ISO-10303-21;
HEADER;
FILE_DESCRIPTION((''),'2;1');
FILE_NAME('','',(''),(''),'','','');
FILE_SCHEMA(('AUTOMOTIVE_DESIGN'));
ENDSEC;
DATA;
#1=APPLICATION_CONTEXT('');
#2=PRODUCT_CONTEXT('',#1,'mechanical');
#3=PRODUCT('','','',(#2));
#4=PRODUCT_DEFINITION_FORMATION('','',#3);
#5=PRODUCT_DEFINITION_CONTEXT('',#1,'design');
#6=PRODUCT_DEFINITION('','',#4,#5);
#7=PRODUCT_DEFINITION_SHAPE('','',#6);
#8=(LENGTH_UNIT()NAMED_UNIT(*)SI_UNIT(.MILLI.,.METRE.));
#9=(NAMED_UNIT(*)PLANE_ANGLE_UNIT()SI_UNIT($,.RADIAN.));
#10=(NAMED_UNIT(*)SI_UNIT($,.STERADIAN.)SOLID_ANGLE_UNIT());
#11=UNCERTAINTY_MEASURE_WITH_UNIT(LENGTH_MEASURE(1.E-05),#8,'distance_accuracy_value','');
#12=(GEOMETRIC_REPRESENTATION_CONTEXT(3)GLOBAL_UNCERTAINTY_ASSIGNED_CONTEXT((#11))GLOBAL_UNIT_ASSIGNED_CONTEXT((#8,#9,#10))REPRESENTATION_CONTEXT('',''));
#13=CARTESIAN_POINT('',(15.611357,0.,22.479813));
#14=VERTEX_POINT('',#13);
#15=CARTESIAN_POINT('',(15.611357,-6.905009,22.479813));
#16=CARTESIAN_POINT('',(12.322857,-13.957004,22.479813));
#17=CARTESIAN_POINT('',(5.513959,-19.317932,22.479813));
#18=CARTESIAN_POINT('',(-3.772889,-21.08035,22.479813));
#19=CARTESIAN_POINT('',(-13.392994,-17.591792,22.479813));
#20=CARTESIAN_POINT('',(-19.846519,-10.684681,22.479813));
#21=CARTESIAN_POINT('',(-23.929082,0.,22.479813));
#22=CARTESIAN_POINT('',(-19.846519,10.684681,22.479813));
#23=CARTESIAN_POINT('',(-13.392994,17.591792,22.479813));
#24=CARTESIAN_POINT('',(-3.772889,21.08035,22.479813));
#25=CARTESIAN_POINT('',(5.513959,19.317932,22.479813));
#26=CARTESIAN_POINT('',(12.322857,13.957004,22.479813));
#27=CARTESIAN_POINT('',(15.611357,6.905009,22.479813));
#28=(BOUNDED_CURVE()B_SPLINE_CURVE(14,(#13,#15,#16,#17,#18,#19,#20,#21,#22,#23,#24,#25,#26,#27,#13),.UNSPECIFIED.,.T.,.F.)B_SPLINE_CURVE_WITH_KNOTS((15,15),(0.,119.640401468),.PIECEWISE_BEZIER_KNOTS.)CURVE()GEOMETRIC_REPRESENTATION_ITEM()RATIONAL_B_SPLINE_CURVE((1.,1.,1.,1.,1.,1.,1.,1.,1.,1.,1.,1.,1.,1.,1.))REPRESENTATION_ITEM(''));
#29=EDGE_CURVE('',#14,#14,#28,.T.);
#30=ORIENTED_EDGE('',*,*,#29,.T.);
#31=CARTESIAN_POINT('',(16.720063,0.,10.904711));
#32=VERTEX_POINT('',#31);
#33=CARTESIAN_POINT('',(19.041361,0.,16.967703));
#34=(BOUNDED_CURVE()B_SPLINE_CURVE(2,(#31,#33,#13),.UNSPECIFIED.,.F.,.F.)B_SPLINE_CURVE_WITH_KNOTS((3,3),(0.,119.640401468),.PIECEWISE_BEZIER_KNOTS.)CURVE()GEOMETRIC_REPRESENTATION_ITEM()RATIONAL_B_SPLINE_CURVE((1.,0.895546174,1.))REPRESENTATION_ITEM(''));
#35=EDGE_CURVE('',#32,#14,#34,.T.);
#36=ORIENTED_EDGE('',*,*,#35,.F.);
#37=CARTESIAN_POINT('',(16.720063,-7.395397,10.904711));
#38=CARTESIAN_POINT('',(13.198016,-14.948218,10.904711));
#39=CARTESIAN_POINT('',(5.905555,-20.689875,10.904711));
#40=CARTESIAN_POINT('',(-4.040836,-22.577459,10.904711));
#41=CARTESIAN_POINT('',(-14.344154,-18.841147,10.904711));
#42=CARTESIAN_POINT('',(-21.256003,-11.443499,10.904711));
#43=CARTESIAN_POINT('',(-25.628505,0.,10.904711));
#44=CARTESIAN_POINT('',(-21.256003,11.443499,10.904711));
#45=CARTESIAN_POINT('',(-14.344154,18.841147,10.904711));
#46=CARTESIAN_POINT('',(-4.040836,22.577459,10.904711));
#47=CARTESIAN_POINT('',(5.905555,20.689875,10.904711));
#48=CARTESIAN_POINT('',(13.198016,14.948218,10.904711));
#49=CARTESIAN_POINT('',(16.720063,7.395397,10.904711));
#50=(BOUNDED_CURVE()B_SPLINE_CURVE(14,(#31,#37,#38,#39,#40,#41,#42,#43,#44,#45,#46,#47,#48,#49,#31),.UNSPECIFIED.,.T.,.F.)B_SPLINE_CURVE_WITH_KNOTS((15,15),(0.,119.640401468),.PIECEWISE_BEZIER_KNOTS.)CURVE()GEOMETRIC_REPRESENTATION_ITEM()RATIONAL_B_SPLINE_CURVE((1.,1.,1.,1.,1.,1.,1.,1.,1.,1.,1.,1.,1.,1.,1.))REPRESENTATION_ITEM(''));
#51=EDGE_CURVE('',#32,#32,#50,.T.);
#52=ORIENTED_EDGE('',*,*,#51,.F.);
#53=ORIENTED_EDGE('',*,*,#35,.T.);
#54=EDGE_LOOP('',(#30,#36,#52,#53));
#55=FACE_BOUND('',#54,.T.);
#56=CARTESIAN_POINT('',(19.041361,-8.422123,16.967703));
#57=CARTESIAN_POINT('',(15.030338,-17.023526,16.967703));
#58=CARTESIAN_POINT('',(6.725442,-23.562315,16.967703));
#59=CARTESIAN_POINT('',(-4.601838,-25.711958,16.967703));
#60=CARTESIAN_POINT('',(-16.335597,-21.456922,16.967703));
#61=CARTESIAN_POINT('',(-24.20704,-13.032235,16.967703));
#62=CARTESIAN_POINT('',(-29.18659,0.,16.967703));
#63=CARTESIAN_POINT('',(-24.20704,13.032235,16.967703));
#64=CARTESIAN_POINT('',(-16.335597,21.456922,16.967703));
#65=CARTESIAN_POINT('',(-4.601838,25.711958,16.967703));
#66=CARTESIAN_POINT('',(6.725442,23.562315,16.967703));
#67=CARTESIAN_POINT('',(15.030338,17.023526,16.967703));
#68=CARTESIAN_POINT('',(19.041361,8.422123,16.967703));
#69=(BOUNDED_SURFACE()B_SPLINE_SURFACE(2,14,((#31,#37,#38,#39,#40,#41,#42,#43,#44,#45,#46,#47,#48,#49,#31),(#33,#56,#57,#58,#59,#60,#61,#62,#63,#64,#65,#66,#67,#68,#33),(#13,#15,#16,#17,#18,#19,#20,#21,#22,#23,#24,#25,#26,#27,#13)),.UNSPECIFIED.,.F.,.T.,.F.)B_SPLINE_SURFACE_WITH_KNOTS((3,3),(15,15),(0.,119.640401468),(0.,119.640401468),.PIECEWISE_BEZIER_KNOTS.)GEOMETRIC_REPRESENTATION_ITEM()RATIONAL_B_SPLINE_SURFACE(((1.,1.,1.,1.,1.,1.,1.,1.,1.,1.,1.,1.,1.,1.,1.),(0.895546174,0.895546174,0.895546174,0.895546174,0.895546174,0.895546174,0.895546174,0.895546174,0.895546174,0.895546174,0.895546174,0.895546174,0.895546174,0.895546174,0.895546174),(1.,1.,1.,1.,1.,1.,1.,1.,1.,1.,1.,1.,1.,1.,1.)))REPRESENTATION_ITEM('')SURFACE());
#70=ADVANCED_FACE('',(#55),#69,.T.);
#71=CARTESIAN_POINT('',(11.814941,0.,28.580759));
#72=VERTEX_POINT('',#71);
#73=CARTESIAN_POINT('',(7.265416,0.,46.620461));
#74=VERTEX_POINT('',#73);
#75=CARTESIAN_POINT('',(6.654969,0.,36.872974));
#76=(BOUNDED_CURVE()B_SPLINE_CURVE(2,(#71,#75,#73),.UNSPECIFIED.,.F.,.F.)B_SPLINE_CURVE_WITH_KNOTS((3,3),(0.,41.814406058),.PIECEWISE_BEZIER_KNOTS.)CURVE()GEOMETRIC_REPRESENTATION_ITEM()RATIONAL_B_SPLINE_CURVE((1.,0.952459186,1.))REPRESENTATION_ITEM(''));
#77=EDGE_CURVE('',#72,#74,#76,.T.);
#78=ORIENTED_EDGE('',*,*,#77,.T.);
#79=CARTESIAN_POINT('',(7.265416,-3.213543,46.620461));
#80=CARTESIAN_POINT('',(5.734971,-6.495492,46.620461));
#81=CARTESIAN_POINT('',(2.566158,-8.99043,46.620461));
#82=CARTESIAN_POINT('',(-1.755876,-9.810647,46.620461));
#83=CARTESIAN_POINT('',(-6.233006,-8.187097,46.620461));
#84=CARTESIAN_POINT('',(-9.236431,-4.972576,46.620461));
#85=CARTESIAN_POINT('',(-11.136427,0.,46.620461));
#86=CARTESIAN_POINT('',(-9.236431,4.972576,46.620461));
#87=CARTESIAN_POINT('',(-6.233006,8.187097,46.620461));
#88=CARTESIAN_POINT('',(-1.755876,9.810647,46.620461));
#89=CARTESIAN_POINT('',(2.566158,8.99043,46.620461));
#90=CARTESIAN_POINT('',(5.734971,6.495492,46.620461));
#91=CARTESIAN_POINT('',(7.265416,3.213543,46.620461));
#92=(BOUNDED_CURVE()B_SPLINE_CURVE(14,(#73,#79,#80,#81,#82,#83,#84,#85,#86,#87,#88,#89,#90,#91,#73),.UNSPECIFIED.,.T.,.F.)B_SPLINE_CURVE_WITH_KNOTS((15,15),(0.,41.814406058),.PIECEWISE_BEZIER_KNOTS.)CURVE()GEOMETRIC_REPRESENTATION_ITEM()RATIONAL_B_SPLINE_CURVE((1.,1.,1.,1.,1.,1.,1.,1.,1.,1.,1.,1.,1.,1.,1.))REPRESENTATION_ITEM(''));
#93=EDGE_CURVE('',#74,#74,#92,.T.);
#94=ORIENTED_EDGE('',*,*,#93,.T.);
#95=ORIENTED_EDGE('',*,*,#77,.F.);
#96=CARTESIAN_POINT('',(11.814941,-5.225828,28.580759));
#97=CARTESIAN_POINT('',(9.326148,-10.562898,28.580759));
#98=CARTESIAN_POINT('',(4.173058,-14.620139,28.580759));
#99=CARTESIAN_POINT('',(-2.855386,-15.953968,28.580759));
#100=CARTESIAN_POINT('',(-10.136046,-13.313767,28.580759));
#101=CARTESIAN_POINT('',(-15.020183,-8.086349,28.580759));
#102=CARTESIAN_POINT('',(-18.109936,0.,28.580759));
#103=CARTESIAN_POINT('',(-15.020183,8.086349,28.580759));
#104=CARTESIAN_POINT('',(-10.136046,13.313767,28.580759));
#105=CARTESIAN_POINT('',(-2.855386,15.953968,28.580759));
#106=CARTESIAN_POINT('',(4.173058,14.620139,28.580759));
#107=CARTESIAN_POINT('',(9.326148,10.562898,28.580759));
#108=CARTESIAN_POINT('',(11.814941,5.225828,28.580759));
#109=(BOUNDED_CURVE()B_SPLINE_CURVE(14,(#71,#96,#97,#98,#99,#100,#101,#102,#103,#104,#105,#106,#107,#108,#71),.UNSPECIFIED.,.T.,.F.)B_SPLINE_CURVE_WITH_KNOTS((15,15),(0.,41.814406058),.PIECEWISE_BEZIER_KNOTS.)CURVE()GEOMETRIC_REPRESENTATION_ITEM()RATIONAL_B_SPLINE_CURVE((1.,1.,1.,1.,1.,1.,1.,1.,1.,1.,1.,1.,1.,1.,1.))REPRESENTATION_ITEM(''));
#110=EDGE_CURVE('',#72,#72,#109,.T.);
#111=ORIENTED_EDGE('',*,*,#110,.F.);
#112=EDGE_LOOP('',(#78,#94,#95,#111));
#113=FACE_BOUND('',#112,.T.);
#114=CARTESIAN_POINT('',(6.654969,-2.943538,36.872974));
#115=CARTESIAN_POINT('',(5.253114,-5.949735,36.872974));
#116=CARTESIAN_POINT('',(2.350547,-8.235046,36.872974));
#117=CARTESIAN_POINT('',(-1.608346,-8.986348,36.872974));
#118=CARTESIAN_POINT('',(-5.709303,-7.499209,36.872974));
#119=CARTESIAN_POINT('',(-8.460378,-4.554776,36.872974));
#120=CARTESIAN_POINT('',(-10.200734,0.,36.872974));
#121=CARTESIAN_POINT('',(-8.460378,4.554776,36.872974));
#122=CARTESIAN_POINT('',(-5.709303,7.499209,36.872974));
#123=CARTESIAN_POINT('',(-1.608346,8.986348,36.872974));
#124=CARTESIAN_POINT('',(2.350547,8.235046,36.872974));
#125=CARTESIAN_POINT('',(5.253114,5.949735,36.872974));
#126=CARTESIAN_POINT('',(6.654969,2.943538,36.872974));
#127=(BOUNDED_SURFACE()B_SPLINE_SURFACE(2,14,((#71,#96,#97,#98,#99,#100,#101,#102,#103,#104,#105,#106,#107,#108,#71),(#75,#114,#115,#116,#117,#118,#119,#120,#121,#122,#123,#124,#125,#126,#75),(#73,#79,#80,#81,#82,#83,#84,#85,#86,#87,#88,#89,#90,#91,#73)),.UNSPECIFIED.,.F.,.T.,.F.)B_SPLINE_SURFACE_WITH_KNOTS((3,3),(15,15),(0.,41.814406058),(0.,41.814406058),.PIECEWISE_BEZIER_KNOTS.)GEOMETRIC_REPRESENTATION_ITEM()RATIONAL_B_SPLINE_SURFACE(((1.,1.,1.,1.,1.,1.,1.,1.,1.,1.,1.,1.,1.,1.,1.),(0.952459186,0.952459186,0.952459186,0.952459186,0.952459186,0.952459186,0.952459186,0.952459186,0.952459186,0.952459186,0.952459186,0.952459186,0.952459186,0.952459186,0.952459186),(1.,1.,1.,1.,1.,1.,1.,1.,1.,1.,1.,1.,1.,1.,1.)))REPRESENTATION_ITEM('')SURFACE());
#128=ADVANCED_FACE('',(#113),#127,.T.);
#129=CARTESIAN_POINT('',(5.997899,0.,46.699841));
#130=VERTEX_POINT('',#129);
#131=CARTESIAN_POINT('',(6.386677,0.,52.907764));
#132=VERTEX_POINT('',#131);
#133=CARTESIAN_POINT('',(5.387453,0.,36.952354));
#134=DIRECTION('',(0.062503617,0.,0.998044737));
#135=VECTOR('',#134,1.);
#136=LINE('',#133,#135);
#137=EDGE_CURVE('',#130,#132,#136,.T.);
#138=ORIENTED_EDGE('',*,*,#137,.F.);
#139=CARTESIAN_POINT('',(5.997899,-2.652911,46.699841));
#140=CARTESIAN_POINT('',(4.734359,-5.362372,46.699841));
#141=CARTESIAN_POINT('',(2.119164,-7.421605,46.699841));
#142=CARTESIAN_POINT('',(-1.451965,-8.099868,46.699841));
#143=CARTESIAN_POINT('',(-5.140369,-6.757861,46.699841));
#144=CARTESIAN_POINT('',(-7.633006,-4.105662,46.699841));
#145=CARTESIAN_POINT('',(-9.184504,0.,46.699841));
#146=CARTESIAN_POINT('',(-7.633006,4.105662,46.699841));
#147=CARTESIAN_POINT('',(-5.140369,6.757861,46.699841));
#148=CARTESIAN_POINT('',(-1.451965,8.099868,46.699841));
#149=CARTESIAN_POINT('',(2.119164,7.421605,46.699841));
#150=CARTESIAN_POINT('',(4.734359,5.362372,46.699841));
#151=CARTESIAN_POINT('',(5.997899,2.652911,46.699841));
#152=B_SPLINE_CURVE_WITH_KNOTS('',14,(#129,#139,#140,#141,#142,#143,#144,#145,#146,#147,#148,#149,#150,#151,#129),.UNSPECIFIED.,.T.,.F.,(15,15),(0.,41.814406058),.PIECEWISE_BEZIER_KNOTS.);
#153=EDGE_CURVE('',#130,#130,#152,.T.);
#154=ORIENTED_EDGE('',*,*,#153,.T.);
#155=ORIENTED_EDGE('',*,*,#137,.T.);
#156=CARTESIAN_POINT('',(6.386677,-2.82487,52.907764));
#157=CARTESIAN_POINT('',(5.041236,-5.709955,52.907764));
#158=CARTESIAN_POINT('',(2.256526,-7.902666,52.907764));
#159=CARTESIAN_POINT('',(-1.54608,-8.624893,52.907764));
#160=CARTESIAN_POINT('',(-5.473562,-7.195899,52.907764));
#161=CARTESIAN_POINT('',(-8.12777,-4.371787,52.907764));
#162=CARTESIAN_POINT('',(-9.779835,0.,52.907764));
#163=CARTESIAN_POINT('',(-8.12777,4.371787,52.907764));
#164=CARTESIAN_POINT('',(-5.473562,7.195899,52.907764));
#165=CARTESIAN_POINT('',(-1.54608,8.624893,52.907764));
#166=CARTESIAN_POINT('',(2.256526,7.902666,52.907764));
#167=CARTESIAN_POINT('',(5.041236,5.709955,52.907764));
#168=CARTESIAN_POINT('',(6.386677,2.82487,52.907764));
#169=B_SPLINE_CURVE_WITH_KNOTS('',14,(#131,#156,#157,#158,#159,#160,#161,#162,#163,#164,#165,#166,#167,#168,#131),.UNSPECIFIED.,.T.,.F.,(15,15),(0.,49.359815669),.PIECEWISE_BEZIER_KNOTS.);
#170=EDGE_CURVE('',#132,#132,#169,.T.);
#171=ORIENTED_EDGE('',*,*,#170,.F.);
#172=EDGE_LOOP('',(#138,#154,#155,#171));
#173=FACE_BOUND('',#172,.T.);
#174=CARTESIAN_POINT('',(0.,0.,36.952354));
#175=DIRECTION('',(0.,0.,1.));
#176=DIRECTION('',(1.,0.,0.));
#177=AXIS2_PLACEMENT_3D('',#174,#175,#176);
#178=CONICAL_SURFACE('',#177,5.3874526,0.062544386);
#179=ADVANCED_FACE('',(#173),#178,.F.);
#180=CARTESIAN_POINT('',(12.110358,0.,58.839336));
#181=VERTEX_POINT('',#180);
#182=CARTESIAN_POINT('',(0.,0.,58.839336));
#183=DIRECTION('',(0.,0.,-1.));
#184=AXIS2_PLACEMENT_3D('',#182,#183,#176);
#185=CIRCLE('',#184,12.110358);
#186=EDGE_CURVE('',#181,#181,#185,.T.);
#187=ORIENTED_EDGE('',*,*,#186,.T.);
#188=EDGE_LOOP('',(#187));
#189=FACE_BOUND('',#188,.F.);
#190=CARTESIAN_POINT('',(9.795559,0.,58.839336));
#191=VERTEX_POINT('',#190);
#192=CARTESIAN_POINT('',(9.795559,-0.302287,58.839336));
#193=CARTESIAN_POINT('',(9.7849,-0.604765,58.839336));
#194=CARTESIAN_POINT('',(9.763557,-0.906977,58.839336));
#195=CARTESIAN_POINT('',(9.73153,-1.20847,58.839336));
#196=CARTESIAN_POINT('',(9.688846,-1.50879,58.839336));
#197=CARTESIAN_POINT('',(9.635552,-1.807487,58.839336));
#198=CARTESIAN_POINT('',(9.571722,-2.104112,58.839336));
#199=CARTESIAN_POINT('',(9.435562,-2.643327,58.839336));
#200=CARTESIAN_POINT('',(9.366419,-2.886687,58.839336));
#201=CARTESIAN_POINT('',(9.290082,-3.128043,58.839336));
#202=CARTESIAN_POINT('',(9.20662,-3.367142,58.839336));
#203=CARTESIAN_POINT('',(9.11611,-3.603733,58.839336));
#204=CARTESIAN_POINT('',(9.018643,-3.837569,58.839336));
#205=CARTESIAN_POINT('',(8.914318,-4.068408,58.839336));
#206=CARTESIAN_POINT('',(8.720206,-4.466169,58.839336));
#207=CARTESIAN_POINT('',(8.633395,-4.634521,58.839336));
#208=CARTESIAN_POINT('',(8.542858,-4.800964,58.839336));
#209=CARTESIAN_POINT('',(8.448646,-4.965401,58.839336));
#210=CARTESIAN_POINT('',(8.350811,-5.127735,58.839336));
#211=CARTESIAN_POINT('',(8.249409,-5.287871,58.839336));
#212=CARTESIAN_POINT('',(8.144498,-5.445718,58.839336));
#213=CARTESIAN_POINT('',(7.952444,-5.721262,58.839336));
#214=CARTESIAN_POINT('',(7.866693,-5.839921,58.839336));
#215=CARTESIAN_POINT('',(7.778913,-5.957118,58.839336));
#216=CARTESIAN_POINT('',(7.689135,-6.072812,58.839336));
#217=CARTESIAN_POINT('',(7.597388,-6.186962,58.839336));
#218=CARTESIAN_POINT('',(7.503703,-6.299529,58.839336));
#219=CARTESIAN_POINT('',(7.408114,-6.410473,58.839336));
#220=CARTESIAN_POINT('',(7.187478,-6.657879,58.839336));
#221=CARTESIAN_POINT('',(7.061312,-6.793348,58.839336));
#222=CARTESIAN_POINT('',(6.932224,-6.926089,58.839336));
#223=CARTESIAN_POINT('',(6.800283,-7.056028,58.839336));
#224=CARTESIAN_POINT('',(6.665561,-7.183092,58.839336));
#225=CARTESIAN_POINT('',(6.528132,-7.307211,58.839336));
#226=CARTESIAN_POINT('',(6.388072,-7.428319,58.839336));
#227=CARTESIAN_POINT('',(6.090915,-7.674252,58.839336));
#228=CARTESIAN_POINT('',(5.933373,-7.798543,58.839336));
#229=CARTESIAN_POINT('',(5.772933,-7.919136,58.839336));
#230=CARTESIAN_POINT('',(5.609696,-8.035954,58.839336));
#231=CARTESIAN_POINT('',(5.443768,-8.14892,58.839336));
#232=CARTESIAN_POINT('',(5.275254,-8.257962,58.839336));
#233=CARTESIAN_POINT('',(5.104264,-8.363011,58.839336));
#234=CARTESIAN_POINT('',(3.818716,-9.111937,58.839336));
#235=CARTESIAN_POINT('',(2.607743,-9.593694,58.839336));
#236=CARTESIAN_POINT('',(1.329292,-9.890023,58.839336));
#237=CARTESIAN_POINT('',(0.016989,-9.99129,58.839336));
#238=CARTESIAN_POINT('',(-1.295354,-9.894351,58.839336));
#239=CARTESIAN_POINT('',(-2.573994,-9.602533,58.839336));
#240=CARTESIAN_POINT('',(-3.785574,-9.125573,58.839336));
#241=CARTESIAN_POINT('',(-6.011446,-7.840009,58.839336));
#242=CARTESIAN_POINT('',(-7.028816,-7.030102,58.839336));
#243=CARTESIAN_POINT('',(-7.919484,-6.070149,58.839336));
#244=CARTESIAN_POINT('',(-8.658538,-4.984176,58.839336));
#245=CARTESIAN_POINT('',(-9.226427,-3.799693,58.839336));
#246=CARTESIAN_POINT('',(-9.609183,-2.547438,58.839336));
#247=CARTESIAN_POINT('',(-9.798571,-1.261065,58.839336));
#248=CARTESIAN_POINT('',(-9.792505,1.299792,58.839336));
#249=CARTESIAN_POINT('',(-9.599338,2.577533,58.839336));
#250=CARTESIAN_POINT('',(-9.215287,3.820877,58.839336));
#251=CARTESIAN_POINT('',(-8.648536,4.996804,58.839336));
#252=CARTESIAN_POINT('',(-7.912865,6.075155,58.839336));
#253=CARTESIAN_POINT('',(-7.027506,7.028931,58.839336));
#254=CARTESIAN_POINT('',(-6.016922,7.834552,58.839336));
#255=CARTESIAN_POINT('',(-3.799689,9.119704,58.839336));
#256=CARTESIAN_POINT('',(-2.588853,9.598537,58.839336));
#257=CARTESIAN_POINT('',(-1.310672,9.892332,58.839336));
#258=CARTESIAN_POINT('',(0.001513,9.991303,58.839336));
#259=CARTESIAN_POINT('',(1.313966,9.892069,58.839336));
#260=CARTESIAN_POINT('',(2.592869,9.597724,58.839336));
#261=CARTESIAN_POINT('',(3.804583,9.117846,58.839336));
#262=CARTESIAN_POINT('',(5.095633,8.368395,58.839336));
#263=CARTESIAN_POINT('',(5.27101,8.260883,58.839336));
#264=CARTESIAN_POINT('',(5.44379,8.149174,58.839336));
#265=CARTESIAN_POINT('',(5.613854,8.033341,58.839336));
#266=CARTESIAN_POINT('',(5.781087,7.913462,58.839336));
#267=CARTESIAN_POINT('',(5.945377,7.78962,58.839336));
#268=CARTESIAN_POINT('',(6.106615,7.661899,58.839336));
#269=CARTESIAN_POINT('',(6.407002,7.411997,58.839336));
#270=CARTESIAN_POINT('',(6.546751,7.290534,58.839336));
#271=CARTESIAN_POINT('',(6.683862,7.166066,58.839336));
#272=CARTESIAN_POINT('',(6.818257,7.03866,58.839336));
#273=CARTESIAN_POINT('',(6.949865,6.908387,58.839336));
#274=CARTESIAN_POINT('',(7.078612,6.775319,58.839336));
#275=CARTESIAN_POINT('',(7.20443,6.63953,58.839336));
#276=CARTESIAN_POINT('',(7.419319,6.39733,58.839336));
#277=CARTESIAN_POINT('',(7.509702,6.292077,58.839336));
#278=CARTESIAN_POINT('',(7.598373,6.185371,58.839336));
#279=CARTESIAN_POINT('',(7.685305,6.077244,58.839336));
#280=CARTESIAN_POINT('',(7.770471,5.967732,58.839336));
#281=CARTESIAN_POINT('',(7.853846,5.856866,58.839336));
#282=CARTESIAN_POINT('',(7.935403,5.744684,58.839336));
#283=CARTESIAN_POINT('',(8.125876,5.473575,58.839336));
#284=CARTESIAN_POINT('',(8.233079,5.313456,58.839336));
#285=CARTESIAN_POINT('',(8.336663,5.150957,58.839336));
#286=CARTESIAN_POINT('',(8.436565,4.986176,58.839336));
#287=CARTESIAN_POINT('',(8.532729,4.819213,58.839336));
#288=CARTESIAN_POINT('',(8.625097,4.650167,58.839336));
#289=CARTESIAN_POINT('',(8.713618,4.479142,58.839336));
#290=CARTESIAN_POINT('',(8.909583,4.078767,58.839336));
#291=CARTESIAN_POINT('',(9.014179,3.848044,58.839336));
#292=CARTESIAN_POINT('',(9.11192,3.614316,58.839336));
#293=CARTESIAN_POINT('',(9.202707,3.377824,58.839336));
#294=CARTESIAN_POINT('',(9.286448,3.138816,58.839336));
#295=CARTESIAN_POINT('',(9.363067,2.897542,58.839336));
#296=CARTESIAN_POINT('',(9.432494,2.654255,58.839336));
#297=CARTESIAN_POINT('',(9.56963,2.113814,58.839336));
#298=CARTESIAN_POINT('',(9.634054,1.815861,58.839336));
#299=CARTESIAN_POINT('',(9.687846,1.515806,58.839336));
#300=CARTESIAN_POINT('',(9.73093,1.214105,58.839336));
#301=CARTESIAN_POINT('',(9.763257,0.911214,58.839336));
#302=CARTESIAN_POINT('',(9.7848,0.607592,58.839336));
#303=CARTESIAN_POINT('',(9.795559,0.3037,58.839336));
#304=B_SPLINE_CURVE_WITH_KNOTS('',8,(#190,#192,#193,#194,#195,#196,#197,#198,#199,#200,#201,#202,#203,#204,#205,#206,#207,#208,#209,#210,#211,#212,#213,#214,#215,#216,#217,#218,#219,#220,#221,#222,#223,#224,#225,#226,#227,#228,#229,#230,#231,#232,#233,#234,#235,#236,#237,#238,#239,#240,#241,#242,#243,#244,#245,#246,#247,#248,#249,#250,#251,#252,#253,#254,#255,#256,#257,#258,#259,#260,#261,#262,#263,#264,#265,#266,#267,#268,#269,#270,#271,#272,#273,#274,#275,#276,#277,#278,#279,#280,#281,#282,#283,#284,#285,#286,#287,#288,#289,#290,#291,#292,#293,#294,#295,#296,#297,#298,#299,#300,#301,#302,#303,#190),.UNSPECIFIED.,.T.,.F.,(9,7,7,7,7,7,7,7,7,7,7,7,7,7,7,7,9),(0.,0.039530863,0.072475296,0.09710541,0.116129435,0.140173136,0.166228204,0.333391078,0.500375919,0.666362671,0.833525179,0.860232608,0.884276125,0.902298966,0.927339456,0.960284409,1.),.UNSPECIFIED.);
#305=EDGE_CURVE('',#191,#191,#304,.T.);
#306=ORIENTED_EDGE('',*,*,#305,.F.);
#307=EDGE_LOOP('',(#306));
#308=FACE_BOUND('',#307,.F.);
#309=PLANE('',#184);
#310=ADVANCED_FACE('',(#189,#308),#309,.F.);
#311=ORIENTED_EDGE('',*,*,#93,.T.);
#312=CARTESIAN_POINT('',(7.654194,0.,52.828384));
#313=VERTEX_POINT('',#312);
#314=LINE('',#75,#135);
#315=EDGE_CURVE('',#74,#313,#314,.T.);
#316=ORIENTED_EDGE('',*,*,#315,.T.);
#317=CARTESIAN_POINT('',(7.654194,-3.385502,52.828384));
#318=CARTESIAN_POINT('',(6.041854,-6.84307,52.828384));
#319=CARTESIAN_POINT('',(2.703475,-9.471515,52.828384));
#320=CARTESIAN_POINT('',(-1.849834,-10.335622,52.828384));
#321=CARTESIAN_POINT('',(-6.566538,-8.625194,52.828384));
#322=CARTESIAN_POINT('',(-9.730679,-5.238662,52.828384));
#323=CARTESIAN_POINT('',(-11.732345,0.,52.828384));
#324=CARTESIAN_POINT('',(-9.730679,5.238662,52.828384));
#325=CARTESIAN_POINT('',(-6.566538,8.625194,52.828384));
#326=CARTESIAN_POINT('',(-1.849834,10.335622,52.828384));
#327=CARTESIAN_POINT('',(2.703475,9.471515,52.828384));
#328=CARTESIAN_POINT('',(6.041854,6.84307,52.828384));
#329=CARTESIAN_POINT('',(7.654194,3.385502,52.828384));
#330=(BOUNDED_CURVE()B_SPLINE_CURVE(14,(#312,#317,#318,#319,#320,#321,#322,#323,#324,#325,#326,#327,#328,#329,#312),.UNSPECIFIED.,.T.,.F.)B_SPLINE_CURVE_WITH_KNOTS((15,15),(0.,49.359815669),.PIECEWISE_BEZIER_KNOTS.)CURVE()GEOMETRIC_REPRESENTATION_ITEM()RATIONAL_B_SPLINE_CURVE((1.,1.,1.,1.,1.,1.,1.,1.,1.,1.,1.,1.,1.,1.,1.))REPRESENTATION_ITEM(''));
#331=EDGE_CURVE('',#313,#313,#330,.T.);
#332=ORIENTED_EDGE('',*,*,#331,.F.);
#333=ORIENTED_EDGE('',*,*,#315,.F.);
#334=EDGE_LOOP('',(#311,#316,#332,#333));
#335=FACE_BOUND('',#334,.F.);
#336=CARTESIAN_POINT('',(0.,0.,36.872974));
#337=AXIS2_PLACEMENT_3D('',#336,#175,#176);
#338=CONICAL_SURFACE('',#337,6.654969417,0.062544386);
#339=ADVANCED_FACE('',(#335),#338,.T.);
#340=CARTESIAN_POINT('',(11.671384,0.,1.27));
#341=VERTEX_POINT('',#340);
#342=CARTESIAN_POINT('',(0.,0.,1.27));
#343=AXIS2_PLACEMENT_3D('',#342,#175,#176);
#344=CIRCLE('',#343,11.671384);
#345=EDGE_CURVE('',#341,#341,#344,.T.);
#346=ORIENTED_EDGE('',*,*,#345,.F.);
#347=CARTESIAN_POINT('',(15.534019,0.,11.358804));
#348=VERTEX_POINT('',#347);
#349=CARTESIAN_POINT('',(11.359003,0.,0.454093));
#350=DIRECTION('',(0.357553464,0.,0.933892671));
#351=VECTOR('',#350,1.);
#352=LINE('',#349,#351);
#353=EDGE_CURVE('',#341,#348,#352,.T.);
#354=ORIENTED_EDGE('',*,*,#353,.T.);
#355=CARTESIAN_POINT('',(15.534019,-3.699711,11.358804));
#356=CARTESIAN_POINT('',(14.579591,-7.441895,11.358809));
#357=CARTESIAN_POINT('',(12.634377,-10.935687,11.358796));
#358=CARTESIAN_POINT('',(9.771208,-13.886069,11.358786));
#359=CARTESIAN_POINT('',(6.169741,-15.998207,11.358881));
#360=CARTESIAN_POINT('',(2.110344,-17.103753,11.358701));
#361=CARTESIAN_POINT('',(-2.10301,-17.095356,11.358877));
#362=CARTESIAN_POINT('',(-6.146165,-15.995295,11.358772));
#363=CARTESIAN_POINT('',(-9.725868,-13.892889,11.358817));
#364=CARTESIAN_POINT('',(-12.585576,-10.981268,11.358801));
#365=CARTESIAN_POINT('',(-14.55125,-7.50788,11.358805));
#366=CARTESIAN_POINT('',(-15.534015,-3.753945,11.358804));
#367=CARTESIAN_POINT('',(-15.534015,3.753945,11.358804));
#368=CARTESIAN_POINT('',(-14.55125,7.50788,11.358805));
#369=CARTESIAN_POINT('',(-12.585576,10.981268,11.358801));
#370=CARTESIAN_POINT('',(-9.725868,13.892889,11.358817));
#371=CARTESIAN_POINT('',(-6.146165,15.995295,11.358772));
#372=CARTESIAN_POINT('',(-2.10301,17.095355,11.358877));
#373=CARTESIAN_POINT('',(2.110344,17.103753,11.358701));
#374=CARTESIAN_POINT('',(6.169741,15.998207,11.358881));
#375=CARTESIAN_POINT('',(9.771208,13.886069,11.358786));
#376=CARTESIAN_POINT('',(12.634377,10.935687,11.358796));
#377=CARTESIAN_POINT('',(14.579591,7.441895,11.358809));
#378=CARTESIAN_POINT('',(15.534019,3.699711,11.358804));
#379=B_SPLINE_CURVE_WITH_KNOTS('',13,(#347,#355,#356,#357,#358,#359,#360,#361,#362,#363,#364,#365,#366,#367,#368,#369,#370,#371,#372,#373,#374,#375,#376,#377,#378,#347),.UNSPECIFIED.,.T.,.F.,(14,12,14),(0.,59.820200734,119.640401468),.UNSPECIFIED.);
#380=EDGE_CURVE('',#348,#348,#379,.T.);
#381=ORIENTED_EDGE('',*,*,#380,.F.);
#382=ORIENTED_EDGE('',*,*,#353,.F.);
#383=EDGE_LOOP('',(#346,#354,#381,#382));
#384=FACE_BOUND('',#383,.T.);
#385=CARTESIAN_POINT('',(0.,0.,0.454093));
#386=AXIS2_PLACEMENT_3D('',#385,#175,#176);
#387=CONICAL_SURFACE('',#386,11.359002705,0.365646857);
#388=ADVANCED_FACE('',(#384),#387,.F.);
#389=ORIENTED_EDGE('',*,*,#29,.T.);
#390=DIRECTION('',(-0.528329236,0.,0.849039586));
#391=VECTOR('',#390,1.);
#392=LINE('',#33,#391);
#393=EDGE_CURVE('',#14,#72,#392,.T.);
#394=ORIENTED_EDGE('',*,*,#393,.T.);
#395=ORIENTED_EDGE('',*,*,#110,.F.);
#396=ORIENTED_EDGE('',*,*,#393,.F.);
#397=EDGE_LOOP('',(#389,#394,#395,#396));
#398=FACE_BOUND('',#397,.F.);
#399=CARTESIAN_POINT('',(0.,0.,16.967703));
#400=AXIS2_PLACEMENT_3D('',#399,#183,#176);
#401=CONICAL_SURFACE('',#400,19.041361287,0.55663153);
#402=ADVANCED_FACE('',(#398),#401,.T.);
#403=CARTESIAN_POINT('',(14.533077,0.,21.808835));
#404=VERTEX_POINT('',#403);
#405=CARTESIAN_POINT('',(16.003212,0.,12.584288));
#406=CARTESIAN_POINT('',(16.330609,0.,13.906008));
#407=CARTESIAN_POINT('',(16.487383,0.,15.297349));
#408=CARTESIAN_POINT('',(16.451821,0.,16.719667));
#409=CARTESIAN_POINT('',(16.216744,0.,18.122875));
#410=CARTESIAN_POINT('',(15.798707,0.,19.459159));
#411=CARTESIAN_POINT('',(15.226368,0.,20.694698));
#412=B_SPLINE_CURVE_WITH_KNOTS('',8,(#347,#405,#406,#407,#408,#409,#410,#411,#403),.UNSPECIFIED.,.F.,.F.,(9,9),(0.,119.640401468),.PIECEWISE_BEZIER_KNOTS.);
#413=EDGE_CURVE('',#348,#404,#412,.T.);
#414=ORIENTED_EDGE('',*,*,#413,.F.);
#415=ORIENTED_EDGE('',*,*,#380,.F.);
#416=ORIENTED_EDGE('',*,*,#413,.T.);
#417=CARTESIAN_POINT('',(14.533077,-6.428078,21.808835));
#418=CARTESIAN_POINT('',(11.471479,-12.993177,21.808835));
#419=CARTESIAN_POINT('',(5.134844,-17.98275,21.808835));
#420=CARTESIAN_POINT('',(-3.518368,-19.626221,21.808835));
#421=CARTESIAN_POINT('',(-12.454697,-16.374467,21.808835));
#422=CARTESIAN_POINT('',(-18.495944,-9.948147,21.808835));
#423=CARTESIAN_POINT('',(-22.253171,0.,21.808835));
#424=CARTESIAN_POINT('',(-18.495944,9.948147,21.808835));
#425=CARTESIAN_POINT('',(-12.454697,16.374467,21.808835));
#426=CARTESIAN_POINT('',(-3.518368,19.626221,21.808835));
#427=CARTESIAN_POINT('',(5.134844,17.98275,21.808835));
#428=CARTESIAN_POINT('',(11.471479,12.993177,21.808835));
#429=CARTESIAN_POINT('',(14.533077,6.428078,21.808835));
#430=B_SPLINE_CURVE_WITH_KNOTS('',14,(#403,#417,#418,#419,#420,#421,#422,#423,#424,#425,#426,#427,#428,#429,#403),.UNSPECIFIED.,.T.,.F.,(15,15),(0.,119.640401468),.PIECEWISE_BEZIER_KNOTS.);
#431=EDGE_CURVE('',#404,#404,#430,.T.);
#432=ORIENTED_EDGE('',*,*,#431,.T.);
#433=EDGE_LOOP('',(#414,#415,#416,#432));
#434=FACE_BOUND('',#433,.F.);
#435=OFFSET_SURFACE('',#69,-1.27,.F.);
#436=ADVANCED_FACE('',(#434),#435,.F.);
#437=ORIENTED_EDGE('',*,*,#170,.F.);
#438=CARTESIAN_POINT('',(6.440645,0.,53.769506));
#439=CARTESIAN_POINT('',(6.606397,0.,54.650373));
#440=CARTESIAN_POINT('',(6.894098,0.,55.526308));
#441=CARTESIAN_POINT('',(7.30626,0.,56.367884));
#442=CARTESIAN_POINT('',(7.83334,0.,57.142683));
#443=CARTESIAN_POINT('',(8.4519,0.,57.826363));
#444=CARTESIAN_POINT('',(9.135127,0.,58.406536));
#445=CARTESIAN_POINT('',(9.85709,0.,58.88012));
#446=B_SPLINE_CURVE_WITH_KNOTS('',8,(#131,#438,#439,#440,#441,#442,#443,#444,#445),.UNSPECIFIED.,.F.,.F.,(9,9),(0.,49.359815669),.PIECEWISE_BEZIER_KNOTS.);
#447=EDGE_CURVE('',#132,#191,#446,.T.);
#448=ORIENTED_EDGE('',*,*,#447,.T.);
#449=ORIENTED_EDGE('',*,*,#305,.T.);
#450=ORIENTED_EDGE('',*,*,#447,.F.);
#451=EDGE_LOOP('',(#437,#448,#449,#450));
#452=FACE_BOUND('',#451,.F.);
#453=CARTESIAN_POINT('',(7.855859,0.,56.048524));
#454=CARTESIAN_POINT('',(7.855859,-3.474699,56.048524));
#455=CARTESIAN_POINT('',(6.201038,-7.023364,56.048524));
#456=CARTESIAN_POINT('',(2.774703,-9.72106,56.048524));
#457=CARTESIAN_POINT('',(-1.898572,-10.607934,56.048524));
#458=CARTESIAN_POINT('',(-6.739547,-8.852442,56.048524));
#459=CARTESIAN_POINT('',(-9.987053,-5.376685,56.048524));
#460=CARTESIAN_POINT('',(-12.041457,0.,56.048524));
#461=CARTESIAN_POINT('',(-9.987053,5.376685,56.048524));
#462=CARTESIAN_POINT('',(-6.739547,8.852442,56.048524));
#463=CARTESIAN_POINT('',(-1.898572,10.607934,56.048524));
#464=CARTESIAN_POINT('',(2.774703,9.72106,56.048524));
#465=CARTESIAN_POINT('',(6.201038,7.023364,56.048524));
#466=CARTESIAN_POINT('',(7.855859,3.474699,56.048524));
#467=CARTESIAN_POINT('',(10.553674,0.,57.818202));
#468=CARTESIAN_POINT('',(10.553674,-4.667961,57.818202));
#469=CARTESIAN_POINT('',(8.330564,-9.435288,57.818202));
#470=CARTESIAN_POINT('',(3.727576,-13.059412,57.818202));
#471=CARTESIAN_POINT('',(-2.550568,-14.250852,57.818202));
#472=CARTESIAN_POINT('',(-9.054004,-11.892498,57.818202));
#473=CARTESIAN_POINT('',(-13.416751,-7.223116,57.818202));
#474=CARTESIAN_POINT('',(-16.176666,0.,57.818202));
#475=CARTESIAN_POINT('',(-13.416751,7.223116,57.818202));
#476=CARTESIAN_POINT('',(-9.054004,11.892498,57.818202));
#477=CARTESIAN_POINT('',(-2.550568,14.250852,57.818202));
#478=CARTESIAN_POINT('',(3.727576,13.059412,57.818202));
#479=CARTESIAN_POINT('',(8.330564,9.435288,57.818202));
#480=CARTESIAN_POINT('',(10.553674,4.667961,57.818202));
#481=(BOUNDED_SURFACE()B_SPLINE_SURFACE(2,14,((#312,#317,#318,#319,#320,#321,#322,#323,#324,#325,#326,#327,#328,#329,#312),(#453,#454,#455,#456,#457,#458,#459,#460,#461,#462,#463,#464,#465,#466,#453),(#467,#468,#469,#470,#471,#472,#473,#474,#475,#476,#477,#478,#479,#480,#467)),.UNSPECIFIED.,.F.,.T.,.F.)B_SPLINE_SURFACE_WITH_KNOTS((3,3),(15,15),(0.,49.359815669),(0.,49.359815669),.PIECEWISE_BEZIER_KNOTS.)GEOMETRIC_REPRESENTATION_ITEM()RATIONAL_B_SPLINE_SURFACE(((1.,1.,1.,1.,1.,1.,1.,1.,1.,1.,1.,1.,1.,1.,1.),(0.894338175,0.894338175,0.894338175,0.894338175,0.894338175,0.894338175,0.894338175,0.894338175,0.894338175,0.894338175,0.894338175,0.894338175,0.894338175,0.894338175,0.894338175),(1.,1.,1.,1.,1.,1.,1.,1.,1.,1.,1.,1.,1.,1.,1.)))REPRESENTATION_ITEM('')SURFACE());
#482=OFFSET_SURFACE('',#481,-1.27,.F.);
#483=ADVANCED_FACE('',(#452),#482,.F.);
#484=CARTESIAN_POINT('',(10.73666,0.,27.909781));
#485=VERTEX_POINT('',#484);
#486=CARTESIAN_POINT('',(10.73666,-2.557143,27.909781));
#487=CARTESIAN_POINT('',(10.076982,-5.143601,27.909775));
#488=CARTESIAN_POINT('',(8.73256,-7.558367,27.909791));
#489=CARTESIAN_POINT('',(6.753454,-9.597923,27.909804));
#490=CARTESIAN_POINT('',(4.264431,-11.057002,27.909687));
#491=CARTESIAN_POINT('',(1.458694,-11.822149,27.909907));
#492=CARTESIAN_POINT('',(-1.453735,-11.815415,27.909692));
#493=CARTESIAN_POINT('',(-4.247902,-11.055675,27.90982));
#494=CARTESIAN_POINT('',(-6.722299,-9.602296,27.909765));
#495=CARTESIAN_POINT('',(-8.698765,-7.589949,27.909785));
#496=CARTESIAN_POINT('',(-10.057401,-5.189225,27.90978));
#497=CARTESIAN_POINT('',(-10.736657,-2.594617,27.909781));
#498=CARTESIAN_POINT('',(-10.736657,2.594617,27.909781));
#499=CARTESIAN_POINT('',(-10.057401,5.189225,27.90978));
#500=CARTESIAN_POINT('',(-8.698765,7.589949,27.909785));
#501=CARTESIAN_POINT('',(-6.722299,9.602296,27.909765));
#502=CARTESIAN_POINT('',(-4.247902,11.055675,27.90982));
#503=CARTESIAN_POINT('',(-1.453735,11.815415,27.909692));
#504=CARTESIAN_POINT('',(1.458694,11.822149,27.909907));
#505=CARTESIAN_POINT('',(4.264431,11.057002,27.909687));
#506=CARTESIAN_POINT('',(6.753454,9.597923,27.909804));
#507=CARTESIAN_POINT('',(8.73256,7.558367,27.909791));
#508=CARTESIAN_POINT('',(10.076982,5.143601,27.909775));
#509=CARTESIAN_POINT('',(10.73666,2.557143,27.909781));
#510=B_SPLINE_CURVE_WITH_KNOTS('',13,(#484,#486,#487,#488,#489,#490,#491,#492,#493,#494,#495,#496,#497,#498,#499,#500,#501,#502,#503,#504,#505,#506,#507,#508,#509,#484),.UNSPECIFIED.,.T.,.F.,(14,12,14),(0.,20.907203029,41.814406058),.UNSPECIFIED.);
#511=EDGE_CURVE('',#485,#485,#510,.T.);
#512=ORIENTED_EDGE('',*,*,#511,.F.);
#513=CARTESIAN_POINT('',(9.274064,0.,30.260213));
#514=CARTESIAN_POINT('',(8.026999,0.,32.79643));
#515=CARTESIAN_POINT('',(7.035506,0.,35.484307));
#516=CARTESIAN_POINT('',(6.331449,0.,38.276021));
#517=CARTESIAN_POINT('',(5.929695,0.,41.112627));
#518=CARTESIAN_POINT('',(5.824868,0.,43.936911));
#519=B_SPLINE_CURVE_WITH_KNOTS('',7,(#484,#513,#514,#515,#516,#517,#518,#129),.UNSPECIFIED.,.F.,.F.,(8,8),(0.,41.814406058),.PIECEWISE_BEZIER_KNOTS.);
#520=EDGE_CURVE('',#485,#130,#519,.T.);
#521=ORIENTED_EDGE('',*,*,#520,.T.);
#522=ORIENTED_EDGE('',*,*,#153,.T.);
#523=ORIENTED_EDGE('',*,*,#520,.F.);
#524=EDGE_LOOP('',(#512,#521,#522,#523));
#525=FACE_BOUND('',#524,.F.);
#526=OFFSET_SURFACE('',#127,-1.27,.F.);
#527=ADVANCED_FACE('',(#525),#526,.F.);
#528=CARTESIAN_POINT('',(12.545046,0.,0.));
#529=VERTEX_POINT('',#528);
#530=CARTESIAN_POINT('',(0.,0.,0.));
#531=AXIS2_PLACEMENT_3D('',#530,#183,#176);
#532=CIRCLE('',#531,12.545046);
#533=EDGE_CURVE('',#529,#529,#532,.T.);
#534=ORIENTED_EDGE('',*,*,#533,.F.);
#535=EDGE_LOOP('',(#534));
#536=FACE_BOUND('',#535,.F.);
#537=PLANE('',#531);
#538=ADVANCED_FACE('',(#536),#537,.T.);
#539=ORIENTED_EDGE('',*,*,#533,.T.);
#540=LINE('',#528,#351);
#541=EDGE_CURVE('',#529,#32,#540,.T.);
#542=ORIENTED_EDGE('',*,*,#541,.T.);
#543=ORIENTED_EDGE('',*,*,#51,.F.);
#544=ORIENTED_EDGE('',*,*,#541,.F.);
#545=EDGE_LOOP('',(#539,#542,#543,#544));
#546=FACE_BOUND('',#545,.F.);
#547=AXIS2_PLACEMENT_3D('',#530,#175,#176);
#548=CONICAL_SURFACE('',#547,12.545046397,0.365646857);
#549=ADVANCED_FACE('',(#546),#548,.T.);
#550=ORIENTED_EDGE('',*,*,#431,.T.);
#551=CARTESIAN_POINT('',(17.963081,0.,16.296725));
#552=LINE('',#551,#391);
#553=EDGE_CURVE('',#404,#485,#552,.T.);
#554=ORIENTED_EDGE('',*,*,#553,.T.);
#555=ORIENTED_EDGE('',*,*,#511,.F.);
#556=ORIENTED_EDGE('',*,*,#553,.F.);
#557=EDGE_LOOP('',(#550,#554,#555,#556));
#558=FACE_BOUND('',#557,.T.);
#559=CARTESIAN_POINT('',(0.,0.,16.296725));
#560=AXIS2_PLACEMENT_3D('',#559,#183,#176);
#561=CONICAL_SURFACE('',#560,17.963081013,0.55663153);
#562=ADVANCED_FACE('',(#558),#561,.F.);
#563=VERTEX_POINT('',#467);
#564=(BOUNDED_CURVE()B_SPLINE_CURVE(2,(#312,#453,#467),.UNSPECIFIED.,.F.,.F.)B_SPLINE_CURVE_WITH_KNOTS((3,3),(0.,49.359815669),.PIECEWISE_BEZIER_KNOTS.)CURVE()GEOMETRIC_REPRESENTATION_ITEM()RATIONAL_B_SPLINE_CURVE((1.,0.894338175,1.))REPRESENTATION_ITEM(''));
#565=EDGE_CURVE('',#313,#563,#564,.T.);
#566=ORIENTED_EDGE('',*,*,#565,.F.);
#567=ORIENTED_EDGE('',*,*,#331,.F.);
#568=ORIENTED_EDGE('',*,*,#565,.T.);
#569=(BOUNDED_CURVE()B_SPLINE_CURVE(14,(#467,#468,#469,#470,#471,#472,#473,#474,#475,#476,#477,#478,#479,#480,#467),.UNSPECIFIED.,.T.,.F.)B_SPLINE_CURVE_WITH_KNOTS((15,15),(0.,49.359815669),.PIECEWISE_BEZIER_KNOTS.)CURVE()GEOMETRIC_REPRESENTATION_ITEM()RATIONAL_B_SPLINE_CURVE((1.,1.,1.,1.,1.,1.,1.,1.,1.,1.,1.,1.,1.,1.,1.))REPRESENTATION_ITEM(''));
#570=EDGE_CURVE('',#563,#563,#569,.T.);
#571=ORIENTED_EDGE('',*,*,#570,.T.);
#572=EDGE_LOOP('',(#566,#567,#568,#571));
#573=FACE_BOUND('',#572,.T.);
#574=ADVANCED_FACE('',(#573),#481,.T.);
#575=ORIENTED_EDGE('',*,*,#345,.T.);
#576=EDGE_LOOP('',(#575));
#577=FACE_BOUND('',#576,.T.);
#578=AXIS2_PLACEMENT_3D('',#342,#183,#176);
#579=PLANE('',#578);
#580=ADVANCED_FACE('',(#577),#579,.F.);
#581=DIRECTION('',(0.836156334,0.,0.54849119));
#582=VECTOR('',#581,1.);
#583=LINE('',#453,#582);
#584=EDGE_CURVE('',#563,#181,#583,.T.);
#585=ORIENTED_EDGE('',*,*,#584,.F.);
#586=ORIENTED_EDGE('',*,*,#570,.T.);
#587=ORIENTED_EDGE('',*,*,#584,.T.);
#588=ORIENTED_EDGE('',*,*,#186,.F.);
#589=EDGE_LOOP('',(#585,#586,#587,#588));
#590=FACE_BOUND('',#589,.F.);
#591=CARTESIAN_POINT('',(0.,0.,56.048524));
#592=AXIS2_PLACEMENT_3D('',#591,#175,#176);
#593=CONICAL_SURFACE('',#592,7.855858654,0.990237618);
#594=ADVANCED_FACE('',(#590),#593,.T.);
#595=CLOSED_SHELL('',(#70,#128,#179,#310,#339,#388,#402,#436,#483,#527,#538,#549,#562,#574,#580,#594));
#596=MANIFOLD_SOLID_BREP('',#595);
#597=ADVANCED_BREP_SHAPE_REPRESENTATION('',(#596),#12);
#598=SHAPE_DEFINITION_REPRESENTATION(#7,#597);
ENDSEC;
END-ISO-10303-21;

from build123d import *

# Parameters (mm, degrees)
F2_R = 13.0661787558
F3_R = 30.5326661472
F4_R = 6.4496868792
F5_T = 1.27


# Not quite as in the source:
# - a shell that OpenCascade refuses in one call is made with other operations: the cavity is built on its own and cut out


with BuildPart() as f1:
    # F0 (on Front) → F1 (revolve)
    with BuildSketch(Plane.XZ):
        Polygon((0, 58.8393360376), (0, 0), (12.5450463966, 0), (19.0413612872, 16.967702657), (6.6549694166, 36.8729744223), (7.8558586538, 56.0485236347), (12.1103581041, 58.8393360376), align=None)
    revolve(axis=Axis((0, 0, 29.4196680188), (0, 0, -1)))

    # F2
    f2_edges = [f1.edges().sort_by_distance(p)[0] for p in [
        (-19.041361, 0, 16.967703),
    ]]
    fillet(f2_edges, radius=F2_R)

    # F3
    f3_edges = [f1.edges().sort_by_distance(p)[0] for p in [
        (-6.654969, 0, 36.872974),
    ]]
    fillet(f3_edges, radius=F3_R)

    # F4
    f4_edges = [f1.edges().sort_by_distance(p)[0] for p in [
        (-7.855859, 0, 56.048524),
    ]]
    fillet(f4_edges, radius=F4_R)

    # F5: shell of thickness 1.27, made by hand


with BuildPart() as f5_core1:
    # F5_t2: copy of F1
    add(f1.part)

    # the walls: a layer under each face that stays
    f5_faces = [f5_core1.faces().sort_by_distance(p)[0] for p in [
        (-7.4598050795, 0, 49.724422652),
        (-8.5147014286, 0, 55.6656825004),
        (-8.1326981188, 0, 37.2456508864),
        (-11.3320158511, 0, 58.3287689924),
        (-13.7131490398, 0, 25.5302860078),
        (-17.5243000505, 0, 16.8223934121),
        (-14.6325546639, 0, 5.4523557079),
        (0, 0, 0),
    ]]
    thicken(f5_faces, amount=-F5_T, mode=Mode.SUBTRACT)


with BuildPart() as f1_1:
    add(f1.part)

    # what is left inside the walls is the cavity
    f5_cavity = [f5_core1.part.solids().sort_by_distance(p)[0] for p in [
        (-8.12206, -14.071681, 16.700091),
    ]]
    add(f5_cavity, mode=Mode.SUBTRACT)


solid = f1_1.part
